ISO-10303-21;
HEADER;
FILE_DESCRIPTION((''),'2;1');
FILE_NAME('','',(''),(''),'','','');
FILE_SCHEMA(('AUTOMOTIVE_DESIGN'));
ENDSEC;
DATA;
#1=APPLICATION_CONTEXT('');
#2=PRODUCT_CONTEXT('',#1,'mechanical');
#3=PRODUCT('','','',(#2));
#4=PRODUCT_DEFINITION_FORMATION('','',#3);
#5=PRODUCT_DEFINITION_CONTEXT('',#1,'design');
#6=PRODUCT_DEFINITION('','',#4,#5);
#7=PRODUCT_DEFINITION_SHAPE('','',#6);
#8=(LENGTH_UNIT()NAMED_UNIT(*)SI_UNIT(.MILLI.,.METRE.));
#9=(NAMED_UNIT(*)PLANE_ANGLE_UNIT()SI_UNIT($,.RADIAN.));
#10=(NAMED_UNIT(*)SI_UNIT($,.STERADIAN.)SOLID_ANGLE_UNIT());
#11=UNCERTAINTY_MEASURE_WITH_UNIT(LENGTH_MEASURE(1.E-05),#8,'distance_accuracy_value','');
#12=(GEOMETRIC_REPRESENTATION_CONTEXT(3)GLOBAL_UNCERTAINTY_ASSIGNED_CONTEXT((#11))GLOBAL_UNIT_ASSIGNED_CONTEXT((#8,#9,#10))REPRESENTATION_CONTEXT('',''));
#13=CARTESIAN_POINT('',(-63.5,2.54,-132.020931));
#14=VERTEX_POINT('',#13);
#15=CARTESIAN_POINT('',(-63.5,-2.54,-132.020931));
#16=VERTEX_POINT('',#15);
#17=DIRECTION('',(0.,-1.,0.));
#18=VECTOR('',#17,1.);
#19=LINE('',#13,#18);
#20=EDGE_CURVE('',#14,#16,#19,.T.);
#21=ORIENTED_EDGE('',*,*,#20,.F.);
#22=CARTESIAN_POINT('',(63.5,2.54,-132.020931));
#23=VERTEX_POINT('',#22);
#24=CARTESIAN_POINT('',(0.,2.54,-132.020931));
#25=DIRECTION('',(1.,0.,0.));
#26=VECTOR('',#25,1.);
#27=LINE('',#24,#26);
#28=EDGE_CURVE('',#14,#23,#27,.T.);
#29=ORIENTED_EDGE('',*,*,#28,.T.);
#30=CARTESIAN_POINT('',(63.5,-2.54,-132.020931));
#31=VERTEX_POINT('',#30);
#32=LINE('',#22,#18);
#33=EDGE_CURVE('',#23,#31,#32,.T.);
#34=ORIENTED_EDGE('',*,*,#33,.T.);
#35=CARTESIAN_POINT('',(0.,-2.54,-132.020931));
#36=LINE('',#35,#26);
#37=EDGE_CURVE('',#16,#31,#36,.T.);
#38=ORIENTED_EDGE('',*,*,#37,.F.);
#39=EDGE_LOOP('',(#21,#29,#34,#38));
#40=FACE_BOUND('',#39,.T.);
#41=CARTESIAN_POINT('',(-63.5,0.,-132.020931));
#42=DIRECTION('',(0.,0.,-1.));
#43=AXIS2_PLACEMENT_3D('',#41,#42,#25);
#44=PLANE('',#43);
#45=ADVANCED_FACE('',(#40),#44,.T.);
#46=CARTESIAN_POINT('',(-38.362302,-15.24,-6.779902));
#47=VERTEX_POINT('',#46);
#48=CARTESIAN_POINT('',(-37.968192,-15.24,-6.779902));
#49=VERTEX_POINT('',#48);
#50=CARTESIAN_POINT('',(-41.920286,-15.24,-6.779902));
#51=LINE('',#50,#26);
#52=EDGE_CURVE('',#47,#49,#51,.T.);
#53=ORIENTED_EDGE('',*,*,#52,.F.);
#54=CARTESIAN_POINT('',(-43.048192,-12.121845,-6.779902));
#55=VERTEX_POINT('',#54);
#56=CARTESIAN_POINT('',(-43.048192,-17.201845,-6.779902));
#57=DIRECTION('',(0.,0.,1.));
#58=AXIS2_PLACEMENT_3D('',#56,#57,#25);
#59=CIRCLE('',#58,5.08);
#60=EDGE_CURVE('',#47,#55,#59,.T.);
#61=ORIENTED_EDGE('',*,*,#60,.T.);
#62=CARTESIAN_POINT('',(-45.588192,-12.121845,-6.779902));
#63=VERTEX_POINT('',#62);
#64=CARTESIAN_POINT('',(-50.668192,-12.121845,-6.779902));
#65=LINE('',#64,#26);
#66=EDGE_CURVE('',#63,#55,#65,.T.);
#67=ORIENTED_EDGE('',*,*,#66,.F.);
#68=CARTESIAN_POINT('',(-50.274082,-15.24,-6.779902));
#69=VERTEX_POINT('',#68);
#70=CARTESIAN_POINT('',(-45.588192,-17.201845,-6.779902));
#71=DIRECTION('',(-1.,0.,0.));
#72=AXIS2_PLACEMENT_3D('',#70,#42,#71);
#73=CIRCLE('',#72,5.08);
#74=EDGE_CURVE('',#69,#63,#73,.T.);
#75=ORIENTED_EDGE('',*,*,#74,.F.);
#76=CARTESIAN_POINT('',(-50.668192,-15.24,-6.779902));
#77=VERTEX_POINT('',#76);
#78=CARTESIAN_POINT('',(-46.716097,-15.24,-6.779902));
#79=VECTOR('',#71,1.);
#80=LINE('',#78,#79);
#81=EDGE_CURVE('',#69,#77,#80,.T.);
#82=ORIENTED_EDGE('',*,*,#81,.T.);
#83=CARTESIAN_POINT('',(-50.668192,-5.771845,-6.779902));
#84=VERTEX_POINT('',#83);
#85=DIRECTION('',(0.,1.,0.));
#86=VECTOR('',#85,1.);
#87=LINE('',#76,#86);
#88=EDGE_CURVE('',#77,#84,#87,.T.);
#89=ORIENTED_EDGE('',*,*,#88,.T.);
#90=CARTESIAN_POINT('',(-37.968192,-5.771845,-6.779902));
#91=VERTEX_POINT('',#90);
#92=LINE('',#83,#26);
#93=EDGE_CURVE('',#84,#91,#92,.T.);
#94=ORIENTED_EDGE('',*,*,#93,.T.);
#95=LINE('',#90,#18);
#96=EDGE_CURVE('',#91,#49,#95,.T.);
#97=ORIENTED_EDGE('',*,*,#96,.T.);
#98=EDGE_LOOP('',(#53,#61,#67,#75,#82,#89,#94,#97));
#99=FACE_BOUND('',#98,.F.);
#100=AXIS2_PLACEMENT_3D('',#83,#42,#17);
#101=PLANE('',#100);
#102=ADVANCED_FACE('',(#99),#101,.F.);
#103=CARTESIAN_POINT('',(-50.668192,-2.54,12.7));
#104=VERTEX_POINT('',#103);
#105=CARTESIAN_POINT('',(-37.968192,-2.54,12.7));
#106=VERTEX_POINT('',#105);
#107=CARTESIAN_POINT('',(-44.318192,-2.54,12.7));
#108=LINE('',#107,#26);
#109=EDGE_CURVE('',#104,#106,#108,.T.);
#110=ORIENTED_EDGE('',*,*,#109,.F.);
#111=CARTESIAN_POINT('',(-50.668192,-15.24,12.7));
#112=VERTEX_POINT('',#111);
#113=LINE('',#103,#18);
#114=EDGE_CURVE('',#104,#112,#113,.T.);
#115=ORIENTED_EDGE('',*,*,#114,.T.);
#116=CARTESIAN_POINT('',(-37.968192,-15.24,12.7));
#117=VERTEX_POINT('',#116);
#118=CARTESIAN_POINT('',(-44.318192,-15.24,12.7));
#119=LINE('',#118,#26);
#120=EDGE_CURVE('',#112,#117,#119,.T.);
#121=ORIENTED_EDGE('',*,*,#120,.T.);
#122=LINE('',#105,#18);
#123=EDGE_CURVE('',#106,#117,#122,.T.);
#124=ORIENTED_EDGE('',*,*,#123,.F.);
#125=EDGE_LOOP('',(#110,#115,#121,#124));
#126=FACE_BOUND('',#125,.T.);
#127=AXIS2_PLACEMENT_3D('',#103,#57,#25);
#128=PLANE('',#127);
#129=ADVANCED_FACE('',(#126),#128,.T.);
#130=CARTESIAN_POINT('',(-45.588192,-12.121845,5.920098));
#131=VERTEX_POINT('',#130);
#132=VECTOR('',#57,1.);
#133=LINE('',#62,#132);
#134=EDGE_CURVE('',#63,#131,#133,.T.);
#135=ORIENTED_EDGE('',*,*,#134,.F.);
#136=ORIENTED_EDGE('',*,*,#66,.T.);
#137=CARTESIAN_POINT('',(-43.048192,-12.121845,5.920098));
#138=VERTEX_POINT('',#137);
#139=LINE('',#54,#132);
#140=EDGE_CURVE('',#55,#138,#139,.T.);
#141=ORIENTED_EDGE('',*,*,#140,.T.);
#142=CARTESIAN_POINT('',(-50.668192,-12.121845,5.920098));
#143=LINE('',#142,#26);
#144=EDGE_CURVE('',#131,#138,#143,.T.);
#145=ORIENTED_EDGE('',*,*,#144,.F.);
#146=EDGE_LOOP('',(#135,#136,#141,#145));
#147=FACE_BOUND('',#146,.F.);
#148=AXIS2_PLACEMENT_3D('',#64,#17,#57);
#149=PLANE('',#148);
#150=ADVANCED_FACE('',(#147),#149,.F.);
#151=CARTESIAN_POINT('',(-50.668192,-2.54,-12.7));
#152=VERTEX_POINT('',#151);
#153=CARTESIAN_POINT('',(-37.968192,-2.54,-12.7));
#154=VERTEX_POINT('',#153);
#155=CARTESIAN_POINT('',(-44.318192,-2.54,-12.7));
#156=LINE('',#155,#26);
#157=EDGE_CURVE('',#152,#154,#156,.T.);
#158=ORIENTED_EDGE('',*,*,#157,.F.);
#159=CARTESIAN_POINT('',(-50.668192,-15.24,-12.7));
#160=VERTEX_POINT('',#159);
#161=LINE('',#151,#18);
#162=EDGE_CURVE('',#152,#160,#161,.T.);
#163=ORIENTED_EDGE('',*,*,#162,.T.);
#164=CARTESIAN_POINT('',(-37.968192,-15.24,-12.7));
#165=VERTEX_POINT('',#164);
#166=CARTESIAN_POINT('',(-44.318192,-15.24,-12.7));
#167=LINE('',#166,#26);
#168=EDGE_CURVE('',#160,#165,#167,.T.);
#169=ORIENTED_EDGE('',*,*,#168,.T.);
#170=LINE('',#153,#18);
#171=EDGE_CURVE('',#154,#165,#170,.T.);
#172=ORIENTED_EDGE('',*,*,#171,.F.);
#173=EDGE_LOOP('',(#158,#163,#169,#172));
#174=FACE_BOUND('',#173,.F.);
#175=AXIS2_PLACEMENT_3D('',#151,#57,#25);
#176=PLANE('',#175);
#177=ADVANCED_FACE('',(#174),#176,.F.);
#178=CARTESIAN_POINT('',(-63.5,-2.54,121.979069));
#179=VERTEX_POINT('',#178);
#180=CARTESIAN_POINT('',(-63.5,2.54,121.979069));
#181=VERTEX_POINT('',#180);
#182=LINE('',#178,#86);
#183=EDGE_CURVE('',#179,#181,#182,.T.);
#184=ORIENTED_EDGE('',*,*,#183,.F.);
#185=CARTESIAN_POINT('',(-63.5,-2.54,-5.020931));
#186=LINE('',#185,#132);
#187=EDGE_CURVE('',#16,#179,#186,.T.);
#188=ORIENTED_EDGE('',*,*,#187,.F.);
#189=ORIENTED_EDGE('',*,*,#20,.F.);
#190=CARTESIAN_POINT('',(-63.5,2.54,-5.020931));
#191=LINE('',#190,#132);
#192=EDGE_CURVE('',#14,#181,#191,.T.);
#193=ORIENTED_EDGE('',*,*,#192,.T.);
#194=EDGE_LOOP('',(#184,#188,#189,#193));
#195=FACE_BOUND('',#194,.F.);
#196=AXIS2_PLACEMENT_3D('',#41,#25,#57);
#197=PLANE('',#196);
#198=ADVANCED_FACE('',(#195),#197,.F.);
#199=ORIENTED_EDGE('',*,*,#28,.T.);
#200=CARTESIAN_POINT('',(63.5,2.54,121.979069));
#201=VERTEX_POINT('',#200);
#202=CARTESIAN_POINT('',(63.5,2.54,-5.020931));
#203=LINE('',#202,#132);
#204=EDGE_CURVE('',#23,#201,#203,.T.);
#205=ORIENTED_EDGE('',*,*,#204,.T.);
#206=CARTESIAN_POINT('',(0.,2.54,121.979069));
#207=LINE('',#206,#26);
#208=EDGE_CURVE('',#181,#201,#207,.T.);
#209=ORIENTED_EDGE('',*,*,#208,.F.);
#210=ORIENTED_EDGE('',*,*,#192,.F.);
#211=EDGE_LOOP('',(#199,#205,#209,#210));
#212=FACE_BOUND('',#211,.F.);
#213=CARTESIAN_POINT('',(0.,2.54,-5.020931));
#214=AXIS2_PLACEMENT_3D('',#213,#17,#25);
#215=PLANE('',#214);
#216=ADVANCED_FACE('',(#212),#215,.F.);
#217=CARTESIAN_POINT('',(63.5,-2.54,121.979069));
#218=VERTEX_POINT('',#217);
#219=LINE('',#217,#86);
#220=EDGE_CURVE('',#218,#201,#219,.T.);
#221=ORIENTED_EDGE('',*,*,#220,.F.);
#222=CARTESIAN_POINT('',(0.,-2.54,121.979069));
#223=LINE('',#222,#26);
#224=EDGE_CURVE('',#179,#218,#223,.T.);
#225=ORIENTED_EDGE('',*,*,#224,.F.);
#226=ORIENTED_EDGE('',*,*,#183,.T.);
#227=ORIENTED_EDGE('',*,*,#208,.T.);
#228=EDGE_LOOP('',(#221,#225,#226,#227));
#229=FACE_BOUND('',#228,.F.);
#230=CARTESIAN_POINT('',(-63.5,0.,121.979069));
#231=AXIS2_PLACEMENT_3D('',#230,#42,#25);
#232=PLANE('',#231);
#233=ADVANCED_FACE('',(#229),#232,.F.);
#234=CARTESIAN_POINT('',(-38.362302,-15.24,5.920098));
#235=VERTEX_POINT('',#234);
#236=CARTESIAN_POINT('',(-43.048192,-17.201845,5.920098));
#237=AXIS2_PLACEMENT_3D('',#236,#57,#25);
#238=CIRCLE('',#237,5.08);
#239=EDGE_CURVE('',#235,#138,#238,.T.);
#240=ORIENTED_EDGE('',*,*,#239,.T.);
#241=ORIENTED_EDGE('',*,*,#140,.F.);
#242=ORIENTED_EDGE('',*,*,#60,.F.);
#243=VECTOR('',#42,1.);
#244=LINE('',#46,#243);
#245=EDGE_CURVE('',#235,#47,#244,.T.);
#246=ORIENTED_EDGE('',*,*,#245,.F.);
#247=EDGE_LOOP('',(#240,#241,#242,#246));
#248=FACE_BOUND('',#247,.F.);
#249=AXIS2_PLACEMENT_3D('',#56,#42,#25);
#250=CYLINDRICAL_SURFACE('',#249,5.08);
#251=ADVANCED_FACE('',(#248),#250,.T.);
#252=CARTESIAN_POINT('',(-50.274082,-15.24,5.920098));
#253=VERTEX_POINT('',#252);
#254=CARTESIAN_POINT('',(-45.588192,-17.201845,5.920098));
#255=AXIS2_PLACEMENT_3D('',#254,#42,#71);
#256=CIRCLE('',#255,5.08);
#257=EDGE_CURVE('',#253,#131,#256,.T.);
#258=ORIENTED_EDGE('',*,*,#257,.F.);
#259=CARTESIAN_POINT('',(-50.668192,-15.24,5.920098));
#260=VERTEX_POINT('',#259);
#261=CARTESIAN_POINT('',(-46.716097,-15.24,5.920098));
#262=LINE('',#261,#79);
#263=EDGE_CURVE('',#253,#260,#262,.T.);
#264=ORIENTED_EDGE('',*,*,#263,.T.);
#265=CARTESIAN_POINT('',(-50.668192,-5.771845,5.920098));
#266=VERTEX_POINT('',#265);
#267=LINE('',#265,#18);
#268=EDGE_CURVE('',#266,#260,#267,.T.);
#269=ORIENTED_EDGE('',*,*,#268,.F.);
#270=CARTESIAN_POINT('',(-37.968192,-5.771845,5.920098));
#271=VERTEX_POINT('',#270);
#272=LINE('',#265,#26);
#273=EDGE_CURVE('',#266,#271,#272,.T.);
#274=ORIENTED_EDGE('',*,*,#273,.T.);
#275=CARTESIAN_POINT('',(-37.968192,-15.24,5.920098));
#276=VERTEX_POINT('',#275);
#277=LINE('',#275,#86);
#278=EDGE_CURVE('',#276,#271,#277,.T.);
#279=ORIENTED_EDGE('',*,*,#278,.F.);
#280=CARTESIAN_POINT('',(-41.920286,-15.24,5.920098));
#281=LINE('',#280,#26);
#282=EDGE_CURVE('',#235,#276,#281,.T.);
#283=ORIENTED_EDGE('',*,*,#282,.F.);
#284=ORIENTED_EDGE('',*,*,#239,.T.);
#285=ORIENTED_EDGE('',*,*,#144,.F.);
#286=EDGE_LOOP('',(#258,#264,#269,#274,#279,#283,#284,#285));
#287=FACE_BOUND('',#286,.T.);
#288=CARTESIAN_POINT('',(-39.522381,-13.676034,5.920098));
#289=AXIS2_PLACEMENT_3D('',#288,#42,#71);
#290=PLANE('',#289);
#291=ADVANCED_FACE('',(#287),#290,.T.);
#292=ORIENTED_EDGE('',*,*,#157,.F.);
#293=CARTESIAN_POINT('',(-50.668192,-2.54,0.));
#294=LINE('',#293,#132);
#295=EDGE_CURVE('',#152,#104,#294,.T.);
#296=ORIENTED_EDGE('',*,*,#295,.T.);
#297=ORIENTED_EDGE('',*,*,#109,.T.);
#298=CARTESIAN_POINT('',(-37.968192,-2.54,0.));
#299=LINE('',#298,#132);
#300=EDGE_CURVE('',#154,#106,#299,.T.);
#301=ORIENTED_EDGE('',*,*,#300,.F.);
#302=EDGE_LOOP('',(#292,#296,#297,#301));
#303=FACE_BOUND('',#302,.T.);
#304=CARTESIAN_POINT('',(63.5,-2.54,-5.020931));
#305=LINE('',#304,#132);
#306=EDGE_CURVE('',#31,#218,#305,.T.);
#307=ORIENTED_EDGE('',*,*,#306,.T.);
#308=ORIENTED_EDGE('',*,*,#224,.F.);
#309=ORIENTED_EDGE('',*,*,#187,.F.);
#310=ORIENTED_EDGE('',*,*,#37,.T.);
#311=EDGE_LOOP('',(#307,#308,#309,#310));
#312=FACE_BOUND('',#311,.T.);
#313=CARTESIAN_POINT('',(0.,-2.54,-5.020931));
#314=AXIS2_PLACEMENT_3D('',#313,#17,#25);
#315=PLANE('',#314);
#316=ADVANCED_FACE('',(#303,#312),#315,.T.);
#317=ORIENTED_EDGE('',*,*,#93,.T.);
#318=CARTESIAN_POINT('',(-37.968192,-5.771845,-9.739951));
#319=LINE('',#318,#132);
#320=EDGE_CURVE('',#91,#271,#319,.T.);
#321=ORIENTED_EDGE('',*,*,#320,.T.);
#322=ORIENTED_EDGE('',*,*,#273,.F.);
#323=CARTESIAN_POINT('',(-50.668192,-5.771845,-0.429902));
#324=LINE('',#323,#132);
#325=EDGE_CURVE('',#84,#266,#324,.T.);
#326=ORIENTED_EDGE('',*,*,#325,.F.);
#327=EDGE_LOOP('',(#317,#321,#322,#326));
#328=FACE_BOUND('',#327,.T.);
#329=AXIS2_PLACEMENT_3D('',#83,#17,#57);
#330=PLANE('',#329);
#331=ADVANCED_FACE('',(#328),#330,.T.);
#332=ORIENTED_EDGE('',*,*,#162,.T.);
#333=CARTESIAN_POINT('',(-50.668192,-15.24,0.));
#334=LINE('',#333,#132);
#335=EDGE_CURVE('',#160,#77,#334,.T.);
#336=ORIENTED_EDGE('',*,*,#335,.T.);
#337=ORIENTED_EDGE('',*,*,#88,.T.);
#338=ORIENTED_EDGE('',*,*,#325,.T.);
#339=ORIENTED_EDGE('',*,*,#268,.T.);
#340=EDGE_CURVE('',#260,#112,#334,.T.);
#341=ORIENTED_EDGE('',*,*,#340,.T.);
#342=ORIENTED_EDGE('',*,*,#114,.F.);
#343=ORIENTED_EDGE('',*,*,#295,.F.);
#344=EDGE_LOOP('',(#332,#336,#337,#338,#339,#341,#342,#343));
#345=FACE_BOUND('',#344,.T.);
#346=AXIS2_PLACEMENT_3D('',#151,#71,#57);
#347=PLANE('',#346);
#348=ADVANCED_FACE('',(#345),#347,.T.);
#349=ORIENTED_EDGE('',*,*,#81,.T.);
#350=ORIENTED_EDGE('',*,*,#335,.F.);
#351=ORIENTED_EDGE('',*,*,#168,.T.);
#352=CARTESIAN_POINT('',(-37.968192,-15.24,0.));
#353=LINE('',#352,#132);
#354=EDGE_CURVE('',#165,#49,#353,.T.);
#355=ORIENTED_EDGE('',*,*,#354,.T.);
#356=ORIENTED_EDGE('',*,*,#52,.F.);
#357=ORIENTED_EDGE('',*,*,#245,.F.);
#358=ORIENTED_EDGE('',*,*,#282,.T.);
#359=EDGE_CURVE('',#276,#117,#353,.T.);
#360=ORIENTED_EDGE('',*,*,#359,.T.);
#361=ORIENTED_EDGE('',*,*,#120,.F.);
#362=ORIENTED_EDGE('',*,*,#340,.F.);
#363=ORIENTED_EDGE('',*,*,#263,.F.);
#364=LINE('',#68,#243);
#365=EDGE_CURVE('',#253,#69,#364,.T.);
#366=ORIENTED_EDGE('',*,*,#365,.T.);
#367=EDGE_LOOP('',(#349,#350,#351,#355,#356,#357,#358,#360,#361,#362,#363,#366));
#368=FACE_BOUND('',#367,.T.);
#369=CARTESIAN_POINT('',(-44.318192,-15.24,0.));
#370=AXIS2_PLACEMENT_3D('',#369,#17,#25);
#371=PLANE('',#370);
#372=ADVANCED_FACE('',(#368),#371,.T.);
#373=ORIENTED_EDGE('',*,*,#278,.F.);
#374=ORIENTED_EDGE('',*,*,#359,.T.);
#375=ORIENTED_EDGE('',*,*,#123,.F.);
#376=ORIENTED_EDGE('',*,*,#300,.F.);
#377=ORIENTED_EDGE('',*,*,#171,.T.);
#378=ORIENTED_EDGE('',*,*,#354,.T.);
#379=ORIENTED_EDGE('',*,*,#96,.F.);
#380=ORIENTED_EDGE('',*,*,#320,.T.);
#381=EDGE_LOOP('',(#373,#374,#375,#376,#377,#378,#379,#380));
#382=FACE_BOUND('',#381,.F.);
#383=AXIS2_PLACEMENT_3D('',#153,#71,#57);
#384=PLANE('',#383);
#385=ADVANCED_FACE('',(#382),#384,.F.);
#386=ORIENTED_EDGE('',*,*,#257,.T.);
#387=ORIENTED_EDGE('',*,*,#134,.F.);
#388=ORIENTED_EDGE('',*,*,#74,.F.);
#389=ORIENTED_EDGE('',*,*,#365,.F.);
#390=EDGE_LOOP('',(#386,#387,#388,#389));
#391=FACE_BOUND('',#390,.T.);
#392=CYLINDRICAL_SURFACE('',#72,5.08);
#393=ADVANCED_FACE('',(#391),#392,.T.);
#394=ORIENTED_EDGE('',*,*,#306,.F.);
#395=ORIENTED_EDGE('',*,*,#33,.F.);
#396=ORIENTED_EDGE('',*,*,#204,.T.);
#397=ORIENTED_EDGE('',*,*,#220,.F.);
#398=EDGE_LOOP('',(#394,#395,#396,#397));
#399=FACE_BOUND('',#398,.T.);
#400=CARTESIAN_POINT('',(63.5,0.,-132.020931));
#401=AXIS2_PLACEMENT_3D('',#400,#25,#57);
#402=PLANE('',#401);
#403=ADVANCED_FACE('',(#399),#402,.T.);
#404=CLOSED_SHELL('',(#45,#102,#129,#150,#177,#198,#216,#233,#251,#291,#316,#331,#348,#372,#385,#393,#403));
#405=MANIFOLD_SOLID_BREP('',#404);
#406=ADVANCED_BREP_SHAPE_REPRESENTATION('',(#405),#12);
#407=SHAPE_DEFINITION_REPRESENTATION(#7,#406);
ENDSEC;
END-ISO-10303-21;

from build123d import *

# Parameters (mm, degrees)
F0_W        = 127
F0_H        = 254
F1_DEPTH    = 2.54
F2_W        = 12.7
F2_H        = 25.4
F3_DEPTH    = 12.7
F4_W        = 6.35
F4_H        = 12.7
F5_DEPTH    = 25.4
F6_T1_DEPTH = 12.7


# Not quite as in the source:
# - a fillet or chamfer that OpenCascade refuses, or shapes differently, is made with other operations: its cross-section is extruded or revolved along the edge and cut away or added


with BuildPart() as f1:
    # F0 (on Front) → F1 (new body, symmetric)
    with BuildSketch(Plane.XZ):
        with Locations((0, -5.0209306781)):
            Rectangle(F0_W, F0_H)
    extrude(amount=F1_DEPTH, both=True)

    # F2 (on face) → F3 (join)
    with BuildSketch(Plane.XZ.offset(2.54)):
        with Locations((-44.3181917071, 0)):
            Rectangle(F2_W, F2_H)
    extrude(amount=F3_DEPTH)

    # F4 (on face) → F5 (cut)
    with BuildSketch(Plane(origin=(-50.6681917071, 0, 0), x_dir=(0, -1, 0), z_dir=(-1, 0, 0))):
        with Locations((8.9468448423, -0.4299022911)):
            Rectangle(F4_W, F4_H)
    extrude(amount=-F5_DEPTH, mode=Mode.SUBTRACT)

    # F6: fillet of radius 5.08 on 2 edges, made by hand

    # F6_s2 → F6_t1 (cut)
    with BuildSketch(Plane.XY.offset(-6.7799022911)):
        with BuildLine():
            ThreePointArc((-50.6681917071, -17.2018448423), (-49.1802941556, -13.6097423939), (-45.5881917071, -12.1218448423))
            Line((-45.5881917071, -12.1218448423), (-50.6681917071, -12.1218448423))
            Line((-50.6681917071, -12.1218448423), (-50.6681917071, -17.2018448423))
        make_face()
        with BuildLine():
            ThreePointArc((-37.9681917071, -17.2018448423), (-39.4560892587, -13.6097423939), (-43.0481917071, -12.1218448423))
            Line((-43.0481917071, -12.1218448423), (-37.9681917071, -12.1218448423))
            Line((-37.9681917071, -12.1218448423), (-37.9681917071, -17.2018448423))
        make_face()
    extrude(amount=F6_T1_DEPTH, mode=Mode.SUBTRACT)


solid = f1.part
